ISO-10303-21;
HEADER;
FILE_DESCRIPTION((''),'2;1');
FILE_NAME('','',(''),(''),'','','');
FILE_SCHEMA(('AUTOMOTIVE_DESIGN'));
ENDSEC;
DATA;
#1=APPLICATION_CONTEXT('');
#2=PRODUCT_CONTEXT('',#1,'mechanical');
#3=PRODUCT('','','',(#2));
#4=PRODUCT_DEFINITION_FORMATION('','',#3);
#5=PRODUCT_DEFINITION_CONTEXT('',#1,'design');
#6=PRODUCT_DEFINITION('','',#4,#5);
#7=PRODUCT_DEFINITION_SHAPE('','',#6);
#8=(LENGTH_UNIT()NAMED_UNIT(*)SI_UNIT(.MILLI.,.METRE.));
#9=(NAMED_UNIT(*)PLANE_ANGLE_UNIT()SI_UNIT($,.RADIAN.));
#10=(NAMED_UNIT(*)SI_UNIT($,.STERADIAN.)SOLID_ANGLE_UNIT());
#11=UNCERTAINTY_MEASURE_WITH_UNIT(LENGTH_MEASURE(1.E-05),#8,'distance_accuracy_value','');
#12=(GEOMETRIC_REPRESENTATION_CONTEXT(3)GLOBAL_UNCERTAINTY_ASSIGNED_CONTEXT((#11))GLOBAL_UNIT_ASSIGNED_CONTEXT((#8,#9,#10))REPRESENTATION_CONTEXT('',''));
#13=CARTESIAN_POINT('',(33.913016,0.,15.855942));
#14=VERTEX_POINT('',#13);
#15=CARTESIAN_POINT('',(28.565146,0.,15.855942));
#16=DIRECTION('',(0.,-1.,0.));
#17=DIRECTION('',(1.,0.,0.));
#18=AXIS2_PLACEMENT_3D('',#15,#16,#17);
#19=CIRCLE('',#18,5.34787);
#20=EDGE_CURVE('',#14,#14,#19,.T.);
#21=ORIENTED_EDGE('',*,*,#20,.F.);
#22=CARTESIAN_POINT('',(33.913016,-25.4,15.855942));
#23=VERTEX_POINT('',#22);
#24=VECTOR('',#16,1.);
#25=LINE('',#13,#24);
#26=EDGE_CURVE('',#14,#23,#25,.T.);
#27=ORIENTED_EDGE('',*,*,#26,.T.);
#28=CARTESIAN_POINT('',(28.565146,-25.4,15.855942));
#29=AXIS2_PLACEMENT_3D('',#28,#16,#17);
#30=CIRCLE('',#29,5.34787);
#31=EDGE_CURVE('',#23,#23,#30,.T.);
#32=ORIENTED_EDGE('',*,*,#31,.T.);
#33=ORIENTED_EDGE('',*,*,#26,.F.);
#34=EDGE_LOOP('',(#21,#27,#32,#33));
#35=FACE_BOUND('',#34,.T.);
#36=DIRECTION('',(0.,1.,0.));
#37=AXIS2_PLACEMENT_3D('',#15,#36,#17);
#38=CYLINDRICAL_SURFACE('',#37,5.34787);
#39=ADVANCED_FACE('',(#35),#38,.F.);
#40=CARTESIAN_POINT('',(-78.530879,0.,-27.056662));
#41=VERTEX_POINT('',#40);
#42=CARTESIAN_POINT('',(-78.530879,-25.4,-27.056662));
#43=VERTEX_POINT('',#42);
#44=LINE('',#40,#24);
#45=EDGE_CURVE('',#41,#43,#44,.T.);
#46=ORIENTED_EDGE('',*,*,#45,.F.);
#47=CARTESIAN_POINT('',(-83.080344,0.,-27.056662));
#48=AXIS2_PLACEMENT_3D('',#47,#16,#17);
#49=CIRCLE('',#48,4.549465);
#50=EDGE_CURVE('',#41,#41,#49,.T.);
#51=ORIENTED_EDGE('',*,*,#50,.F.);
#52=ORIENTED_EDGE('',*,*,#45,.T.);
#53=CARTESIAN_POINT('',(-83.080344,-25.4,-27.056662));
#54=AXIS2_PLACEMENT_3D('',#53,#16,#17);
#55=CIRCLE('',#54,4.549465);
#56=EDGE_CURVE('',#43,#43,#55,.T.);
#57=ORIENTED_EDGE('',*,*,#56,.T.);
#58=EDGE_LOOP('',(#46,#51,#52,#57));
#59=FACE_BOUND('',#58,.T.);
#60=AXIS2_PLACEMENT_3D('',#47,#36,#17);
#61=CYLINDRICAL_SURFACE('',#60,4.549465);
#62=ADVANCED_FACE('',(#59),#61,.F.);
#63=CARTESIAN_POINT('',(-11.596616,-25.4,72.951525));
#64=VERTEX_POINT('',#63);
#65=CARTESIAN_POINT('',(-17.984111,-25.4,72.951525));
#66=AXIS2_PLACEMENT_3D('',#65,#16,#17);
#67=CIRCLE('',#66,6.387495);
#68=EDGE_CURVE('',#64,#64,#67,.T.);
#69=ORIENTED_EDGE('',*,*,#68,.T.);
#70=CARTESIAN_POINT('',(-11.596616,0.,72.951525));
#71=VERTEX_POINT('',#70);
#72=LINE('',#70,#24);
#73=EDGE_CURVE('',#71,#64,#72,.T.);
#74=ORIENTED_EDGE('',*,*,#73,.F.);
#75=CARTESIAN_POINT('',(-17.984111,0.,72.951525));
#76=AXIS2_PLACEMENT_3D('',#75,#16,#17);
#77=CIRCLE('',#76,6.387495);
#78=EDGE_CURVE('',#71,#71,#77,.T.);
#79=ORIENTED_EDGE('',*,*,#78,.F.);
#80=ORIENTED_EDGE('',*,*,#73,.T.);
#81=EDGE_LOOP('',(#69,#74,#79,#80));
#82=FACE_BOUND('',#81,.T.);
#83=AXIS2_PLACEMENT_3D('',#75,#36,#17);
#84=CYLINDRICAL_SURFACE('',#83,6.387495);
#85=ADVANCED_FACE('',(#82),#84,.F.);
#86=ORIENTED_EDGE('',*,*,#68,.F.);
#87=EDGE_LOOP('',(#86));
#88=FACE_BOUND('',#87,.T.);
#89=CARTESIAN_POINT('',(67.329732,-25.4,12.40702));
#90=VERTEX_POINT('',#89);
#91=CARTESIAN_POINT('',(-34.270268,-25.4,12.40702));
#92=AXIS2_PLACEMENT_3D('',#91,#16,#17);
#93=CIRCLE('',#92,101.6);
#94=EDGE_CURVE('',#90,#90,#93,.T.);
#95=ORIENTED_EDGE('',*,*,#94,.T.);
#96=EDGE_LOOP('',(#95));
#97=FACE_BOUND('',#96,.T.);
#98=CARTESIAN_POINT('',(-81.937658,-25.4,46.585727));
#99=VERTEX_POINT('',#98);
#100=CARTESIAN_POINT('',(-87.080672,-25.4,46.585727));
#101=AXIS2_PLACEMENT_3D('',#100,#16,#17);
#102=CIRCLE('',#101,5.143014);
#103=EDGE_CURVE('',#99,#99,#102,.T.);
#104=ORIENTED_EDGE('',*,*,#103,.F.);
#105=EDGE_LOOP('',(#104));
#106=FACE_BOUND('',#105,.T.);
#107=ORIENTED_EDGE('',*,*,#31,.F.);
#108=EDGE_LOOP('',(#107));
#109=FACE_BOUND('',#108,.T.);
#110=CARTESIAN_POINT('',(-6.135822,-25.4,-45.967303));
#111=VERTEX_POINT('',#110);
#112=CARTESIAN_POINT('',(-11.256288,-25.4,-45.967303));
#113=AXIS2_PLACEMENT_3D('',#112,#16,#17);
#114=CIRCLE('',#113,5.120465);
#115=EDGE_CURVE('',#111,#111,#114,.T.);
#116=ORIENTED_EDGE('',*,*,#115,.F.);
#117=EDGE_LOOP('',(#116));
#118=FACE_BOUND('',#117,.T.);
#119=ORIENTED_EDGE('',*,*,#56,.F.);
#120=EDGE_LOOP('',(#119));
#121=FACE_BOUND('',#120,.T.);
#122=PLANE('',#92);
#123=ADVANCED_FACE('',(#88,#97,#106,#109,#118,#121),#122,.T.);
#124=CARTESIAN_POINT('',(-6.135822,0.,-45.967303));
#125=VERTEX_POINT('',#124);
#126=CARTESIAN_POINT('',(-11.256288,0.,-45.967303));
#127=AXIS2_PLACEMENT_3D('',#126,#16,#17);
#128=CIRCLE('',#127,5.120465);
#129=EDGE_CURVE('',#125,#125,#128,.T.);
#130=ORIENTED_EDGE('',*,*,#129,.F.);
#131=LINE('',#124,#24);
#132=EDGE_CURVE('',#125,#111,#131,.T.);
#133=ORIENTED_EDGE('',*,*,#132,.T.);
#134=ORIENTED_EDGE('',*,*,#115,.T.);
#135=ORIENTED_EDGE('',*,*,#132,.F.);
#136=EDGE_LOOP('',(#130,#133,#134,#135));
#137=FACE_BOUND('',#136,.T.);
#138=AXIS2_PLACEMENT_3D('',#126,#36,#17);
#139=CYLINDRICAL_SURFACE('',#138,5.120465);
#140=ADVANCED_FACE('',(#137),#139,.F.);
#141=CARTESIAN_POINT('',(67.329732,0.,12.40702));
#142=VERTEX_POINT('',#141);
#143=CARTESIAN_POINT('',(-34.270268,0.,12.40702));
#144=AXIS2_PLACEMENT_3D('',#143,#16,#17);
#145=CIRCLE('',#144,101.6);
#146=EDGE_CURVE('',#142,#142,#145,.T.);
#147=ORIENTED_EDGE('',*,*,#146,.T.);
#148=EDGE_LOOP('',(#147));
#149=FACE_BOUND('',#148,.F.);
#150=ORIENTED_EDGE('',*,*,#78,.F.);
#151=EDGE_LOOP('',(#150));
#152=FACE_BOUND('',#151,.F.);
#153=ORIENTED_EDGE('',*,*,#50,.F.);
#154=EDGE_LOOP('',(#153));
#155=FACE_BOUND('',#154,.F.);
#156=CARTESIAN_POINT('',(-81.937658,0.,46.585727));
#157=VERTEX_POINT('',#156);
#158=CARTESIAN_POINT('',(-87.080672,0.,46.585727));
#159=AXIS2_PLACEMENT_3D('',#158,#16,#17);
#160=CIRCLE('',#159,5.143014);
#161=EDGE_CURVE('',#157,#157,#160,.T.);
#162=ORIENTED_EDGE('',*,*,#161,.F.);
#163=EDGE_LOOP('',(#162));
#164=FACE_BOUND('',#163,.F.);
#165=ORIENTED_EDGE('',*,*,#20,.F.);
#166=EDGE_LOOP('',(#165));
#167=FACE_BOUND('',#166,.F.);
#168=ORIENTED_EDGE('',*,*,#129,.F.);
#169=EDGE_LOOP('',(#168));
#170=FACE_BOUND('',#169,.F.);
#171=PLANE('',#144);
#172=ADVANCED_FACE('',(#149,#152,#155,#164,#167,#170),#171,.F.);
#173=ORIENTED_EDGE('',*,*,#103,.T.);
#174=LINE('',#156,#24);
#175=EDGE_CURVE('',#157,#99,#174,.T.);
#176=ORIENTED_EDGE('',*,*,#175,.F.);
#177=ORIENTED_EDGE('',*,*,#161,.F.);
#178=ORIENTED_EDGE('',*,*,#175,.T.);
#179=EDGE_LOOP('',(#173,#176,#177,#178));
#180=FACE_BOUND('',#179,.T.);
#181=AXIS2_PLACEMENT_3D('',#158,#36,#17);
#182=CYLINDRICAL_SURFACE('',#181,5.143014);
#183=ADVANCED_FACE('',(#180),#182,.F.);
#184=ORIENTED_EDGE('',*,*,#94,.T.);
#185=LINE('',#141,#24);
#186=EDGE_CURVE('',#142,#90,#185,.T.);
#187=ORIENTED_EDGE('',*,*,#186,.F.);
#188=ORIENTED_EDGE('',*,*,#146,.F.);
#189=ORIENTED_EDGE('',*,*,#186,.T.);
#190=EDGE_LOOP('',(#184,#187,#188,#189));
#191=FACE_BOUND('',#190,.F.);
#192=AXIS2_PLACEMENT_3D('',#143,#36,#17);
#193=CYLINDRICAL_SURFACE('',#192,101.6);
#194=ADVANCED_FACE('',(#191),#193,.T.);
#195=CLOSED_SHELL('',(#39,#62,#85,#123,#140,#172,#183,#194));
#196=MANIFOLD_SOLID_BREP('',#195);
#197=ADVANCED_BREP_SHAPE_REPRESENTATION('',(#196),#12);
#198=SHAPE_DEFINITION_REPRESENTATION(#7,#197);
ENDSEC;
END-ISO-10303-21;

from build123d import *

# Parameters (mm, degrees)
F1_R     = 101.6
F1_R_2   = 4.5494653294
F1_R_3   = 5.1204654318
F1_R_4   = 5.1430144974
F1_R_5   = 5.3478696025
F1_R_6   = 6.3874946109
F3_DEPTH = 25.4


# Not quite as in the source:
# - the program builds the solid bodies; features that only make, move or delete a surface that nothing else refers to are left out


with BuildPart() as f3:
    # F1 (on face) → F3 (new body)
    with BuildSketch(Plane.XZ):
        with Locations((-34.2702679336, 12.4070197344)):
            Circle(F1_R)
        with Locations((-83.0803439021, -27.0566623658)):
            Circle(F1_R_2, mode=Mode.SUBTRACT)
        with Locations((-11.2562878057, -45.9673032165)):
            Circle(F1_R_3, mode=Mode.SUBTRACT)
        with Locations((-87.0806723833, 46.585727483)):
            Circle(F1_R_4, mode=Mode.SUBTRACT)
        with Locations((28.565146029, 15.8559419215)):
            Circle(F1_R_5, mode=Mode.SUBTRACT)
        with Locations((-17.984110862, 72.9515254498)):
            Circle(F1_R_6, mode=Mode.SUBTRACT)
    extrude(amount=F3_DEPTH)


solid = f3.part
